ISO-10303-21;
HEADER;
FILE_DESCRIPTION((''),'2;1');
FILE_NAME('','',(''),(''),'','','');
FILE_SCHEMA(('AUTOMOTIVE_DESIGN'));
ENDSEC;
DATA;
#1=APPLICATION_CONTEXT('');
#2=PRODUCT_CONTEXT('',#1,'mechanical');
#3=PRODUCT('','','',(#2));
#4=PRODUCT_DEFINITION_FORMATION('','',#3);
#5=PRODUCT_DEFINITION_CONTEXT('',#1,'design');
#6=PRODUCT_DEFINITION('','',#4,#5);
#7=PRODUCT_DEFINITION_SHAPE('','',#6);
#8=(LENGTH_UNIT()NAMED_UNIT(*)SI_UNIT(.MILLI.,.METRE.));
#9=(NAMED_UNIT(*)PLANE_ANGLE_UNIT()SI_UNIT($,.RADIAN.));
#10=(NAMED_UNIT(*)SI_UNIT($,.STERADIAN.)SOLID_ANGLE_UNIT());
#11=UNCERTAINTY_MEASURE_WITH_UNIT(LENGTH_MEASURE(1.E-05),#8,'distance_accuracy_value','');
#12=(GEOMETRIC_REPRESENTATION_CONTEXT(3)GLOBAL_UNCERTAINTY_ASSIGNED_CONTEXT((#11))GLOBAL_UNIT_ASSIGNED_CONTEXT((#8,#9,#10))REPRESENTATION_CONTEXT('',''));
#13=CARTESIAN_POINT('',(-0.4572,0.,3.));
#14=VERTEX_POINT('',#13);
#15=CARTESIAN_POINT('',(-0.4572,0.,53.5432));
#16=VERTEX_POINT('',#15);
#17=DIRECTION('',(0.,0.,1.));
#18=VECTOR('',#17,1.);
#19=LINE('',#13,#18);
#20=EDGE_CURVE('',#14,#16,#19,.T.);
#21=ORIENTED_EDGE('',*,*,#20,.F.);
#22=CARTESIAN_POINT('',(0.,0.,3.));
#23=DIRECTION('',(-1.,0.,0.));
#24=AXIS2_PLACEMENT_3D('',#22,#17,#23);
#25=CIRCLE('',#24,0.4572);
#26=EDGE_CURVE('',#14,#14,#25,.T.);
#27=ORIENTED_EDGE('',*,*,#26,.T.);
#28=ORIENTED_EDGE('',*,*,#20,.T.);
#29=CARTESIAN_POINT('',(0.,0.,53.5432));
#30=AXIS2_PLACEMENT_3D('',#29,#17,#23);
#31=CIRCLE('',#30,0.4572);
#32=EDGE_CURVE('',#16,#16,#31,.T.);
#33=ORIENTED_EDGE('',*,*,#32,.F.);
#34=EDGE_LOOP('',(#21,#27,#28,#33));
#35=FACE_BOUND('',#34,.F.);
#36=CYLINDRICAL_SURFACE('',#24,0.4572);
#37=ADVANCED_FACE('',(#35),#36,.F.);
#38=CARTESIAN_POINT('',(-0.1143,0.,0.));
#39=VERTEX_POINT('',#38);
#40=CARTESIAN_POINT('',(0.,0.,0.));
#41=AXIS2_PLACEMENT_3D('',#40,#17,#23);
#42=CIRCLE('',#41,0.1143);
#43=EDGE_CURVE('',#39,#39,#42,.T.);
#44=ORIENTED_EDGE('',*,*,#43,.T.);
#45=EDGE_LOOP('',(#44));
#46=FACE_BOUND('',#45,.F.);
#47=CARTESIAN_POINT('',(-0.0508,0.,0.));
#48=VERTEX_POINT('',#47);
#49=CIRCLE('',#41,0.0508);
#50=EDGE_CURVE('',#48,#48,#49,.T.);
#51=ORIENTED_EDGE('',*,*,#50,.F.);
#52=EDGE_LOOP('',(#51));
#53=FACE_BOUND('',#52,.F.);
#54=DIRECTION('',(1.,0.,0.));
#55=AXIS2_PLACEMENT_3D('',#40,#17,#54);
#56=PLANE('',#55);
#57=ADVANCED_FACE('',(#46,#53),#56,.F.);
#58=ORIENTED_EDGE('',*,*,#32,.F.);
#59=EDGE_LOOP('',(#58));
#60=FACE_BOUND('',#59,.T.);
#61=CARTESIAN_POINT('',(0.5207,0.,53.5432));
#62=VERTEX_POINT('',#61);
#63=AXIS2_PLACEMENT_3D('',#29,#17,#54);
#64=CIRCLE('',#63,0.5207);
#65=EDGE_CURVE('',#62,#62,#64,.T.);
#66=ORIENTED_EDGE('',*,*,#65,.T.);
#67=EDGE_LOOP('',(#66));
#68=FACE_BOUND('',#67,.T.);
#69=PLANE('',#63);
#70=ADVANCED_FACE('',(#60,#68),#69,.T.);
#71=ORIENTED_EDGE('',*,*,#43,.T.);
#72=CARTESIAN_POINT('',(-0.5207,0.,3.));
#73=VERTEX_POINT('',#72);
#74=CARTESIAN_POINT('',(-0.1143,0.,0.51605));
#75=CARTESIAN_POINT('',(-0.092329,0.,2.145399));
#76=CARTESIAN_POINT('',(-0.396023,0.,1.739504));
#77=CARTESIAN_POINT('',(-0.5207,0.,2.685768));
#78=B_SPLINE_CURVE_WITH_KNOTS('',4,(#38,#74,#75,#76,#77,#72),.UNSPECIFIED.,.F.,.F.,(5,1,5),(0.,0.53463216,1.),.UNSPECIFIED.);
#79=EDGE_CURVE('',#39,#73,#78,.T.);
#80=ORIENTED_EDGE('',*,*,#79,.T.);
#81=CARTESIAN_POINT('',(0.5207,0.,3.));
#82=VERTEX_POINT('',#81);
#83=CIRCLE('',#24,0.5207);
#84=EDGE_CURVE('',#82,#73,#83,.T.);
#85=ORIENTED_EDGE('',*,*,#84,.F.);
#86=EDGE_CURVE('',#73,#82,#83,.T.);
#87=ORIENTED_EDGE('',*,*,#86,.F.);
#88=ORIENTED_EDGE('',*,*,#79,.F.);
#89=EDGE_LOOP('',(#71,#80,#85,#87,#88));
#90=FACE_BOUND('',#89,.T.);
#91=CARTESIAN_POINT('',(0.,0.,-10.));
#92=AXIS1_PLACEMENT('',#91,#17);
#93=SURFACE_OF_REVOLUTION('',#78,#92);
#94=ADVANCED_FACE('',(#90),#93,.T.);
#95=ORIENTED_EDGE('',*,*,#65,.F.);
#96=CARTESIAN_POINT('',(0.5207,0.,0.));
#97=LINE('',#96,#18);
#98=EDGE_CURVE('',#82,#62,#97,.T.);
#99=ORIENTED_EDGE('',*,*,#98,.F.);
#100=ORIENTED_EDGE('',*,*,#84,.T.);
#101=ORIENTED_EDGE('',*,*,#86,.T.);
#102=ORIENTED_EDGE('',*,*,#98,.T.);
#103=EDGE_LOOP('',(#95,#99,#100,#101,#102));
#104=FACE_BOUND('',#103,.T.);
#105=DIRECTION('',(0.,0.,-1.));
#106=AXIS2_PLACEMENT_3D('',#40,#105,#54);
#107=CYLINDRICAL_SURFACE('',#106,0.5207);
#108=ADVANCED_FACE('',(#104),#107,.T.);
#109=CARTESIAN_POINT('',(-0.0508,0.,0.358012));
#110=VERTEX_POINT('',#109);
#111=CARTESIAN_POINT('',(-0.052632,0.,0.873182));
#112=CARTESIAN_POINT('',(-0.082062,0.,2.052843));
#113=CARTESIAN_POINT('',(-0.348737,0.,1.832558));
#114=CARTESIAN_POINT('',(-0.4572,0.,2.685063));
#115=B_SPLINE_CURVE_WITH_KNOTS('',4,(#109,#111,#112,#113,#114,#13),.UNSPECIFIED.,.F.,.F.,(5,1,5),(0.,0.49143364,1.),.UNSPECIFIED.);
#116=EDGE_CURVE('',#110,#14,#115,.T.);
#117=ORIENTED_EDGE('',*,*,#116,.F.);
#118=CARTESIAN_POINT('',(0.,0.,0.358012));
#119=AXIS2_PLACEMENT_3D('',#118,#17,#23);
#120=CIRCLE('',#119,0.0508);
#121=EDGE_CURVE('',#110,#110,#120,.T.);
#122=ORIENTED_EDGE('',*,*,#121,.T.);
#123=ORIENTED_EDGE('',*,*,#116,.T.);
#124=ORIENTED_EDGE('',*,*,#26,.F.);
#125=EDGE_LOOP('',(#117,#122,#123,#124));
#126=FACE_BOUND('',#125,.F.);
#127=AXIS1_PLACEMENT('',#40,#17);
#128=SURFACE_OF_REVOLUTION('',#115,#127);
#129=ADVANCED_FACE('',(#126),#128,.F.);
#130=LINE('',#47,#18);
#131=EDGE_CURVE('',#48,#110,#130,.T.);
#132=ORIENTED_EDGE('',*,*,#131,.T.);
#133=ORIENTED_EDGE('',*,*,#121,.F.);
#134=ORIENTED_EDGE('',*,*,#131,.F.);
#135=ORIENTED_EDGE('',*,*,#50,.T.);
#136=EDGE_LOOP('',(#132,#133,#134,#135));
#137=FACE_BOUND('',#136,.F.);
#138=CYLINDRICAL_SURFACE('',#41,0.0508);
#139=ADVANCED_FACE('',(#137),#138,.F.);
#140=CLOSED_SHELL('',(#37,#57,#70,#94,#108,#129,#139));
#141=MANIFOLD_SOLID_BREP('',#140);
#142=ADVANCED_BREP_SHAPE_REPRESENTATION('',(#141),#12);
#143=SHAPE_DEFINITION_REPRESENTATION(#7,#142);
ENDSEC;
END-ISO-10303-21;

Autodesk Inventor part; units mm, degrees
ref_plane "YZ Plane" through (0, 0, 0) normal (1, 0, 0) x (0, 1, 0)
ref_plane "XZ Plane" through (0, 0, 0) normal (0, 1, 0) x (-1, 0, 0)
ref_plane "XY Plane" through (0, 0, 0) normal (0, 0, 1) x (1, 0, 0)
sketch "Sketch1" plane through (0, 0, 0) normal (0, 0, 1) x (1, 0, 0)
  circle A0 centre (0, 0) radius 0.5207
  dimension "d0" = 1.0414
sketch "Sketch1 outline for Extrusion1" plane through (0, 0, 0) normal (0, 0, 1) x (1, 0, 0)
  circle A0 centre (0, 0) radius 0.5207
extrude "Extrusion1" add sketch "Sketch1 outline for Extrusion1" along normal blind 53.5432
sketch "Sketch3" plane through (0, 0, 0) normal (0, 1, 0) x (-1, 0, 0)
  line L0 (0, -10.70864) -> (0, 64.25184)
  line L1 (-0.5207, 0) -> (0.5207, 0)
  line L2 (-0.5207, 0) -> (-0.5207, 53.5432)
  line L3 (0.5207, 0) -> (0.5207, 53.5432)
  line L4 (0.4572, 0) -> (0.4572, 53.5432)
  line L5 (-0.5207, 53.5432) -> (0.5207, 53.5432)
  line L6 (0.0508, 0) -> (0, 0)
  line L7 (0, 0) -> (0, 3)
  line L8 (0, 3) -> (0.0508, 3)
  line L9 (0.0508, 3) -> (0.0508, 0)
  line L10 (0, 0) -> (0.1143, 0)
  line L11 (0.1143, 0) -> (0.1143, 3)
  line L12 (0.1143, 3) -> (0, 3)
  line L13 (0, 3) -> (0, 0)
  line L14 (0, 3) -> (0.5207, 3)
  spline S0 degree 4 poles (0.1143, 0) (0.1143, 0.51605) (0.092329, 2.145399) (0.396023, 1.739504) (0.5207, 2.685768) (0.5207, 3) knots 0 0 0 0 0 0.53463216 1 1 1 1 1
  spline S1 degree 4 poles (0.0508, 0) (0.0508, 0.513555) (0.032096, 2.101955) (0.338843, 1.754797) (0.4572, 2.685063) (0.4572, 3) knots 0 0 0 0 0 0.53394472 1 1 1 1 1
  line L15 (0, 54.462693) -> (0.4572, 54.462693)
  line L16 (0.4572, 54.462693) -> (0.4572, 3)
  line L17 (0.4572, 3) -> (0, 3)
  line L18 (0, 3) -> (0, 54.462693)
  point P0 (0.390046, 2.157892)
  point P1 (0.22686, 1.754843)
  point P2 (0.164132, 1.732429)
  point P3 (0.330809, 2.160123)
  point P4 (0.2286, 54.462693)
  dimension "d7" = 3
  dimension "d8" = 0.0508
  dimension "d17" = 0.0635
  dimension "d18" = 0.0635
sketch "Sketch3 outline for Revolution1" plane through (0, 0, 0) normal (0, 1, 0) x (-1, 0, 0)
  spline S0 degree 4 poles (0.1143, 0) (0.1143, 0.51605) (0.092329, 2.145399) (0.396023, 1.739504) (0.5207, 2.685768) (0.5207, 3) knots 0 0 0 0 0 0.53463216 1 1 1 1 1
  line L0 (0.5207, 0) -> (0.5207, 3)
  line L1 (0.4572, 0) -> (0.5207, 0)
  line L2 (0.1143, 0) -> (0.4572, 0)
revolve "Revolution1" cut sketch "Sketch3 outline for Revolution1" angle 360 about axis through (0, 0, -10) along (0, 0, 1)
sketch "Sketch3 outline for Revolution2" plane through (0, 0, 0) normal (0, 1, 0) x (-1, 0, 0)
  line L0 (0, 0) -> (0.0508, 0)
  line L1 (0.0508, 0) -> (0.0508, 0.358012)
  spline S0 degree 4 poles (0.0508, 0.358012) (0.052632, 0.873182) (0.082062, 2.052843) (0.348737, 1.832558) (0.4572, 2.685063) (0.4572, 3) knots 0 0 0 0 0 0.49143364 1 1 1 1 1
  line L2 (0.4572, 3) -> (0, 3)
  line L3 (0, 3) -> (0, 0)
revolve "Revolution2" cut sketch "Sketch3 outline for Revolution2" angle 360 about axis through (0, 0, -10) along (0, 0, 1)
sketch "Sketch3 outline for Revolution3" plane through (0, 0, 0) normal (0, 1, 0) x (-1, 0, 0)
  line L0 (0, 3) -> (0.4572, 3)
  line L1 (0, 54.462693) -> (0, 3)
  line L2 (0.4572, 54.462693) -> (0, 54.462693)
  line L3 (0.4572, 3) -> (0.4572, 54.462693)
revolve "Revolution3" cut sketch "Sketch3 outline for Revolution3" angle 360 about axis through (0, 0, -10) along (0, 0, 1)
properties part number "pipette"
